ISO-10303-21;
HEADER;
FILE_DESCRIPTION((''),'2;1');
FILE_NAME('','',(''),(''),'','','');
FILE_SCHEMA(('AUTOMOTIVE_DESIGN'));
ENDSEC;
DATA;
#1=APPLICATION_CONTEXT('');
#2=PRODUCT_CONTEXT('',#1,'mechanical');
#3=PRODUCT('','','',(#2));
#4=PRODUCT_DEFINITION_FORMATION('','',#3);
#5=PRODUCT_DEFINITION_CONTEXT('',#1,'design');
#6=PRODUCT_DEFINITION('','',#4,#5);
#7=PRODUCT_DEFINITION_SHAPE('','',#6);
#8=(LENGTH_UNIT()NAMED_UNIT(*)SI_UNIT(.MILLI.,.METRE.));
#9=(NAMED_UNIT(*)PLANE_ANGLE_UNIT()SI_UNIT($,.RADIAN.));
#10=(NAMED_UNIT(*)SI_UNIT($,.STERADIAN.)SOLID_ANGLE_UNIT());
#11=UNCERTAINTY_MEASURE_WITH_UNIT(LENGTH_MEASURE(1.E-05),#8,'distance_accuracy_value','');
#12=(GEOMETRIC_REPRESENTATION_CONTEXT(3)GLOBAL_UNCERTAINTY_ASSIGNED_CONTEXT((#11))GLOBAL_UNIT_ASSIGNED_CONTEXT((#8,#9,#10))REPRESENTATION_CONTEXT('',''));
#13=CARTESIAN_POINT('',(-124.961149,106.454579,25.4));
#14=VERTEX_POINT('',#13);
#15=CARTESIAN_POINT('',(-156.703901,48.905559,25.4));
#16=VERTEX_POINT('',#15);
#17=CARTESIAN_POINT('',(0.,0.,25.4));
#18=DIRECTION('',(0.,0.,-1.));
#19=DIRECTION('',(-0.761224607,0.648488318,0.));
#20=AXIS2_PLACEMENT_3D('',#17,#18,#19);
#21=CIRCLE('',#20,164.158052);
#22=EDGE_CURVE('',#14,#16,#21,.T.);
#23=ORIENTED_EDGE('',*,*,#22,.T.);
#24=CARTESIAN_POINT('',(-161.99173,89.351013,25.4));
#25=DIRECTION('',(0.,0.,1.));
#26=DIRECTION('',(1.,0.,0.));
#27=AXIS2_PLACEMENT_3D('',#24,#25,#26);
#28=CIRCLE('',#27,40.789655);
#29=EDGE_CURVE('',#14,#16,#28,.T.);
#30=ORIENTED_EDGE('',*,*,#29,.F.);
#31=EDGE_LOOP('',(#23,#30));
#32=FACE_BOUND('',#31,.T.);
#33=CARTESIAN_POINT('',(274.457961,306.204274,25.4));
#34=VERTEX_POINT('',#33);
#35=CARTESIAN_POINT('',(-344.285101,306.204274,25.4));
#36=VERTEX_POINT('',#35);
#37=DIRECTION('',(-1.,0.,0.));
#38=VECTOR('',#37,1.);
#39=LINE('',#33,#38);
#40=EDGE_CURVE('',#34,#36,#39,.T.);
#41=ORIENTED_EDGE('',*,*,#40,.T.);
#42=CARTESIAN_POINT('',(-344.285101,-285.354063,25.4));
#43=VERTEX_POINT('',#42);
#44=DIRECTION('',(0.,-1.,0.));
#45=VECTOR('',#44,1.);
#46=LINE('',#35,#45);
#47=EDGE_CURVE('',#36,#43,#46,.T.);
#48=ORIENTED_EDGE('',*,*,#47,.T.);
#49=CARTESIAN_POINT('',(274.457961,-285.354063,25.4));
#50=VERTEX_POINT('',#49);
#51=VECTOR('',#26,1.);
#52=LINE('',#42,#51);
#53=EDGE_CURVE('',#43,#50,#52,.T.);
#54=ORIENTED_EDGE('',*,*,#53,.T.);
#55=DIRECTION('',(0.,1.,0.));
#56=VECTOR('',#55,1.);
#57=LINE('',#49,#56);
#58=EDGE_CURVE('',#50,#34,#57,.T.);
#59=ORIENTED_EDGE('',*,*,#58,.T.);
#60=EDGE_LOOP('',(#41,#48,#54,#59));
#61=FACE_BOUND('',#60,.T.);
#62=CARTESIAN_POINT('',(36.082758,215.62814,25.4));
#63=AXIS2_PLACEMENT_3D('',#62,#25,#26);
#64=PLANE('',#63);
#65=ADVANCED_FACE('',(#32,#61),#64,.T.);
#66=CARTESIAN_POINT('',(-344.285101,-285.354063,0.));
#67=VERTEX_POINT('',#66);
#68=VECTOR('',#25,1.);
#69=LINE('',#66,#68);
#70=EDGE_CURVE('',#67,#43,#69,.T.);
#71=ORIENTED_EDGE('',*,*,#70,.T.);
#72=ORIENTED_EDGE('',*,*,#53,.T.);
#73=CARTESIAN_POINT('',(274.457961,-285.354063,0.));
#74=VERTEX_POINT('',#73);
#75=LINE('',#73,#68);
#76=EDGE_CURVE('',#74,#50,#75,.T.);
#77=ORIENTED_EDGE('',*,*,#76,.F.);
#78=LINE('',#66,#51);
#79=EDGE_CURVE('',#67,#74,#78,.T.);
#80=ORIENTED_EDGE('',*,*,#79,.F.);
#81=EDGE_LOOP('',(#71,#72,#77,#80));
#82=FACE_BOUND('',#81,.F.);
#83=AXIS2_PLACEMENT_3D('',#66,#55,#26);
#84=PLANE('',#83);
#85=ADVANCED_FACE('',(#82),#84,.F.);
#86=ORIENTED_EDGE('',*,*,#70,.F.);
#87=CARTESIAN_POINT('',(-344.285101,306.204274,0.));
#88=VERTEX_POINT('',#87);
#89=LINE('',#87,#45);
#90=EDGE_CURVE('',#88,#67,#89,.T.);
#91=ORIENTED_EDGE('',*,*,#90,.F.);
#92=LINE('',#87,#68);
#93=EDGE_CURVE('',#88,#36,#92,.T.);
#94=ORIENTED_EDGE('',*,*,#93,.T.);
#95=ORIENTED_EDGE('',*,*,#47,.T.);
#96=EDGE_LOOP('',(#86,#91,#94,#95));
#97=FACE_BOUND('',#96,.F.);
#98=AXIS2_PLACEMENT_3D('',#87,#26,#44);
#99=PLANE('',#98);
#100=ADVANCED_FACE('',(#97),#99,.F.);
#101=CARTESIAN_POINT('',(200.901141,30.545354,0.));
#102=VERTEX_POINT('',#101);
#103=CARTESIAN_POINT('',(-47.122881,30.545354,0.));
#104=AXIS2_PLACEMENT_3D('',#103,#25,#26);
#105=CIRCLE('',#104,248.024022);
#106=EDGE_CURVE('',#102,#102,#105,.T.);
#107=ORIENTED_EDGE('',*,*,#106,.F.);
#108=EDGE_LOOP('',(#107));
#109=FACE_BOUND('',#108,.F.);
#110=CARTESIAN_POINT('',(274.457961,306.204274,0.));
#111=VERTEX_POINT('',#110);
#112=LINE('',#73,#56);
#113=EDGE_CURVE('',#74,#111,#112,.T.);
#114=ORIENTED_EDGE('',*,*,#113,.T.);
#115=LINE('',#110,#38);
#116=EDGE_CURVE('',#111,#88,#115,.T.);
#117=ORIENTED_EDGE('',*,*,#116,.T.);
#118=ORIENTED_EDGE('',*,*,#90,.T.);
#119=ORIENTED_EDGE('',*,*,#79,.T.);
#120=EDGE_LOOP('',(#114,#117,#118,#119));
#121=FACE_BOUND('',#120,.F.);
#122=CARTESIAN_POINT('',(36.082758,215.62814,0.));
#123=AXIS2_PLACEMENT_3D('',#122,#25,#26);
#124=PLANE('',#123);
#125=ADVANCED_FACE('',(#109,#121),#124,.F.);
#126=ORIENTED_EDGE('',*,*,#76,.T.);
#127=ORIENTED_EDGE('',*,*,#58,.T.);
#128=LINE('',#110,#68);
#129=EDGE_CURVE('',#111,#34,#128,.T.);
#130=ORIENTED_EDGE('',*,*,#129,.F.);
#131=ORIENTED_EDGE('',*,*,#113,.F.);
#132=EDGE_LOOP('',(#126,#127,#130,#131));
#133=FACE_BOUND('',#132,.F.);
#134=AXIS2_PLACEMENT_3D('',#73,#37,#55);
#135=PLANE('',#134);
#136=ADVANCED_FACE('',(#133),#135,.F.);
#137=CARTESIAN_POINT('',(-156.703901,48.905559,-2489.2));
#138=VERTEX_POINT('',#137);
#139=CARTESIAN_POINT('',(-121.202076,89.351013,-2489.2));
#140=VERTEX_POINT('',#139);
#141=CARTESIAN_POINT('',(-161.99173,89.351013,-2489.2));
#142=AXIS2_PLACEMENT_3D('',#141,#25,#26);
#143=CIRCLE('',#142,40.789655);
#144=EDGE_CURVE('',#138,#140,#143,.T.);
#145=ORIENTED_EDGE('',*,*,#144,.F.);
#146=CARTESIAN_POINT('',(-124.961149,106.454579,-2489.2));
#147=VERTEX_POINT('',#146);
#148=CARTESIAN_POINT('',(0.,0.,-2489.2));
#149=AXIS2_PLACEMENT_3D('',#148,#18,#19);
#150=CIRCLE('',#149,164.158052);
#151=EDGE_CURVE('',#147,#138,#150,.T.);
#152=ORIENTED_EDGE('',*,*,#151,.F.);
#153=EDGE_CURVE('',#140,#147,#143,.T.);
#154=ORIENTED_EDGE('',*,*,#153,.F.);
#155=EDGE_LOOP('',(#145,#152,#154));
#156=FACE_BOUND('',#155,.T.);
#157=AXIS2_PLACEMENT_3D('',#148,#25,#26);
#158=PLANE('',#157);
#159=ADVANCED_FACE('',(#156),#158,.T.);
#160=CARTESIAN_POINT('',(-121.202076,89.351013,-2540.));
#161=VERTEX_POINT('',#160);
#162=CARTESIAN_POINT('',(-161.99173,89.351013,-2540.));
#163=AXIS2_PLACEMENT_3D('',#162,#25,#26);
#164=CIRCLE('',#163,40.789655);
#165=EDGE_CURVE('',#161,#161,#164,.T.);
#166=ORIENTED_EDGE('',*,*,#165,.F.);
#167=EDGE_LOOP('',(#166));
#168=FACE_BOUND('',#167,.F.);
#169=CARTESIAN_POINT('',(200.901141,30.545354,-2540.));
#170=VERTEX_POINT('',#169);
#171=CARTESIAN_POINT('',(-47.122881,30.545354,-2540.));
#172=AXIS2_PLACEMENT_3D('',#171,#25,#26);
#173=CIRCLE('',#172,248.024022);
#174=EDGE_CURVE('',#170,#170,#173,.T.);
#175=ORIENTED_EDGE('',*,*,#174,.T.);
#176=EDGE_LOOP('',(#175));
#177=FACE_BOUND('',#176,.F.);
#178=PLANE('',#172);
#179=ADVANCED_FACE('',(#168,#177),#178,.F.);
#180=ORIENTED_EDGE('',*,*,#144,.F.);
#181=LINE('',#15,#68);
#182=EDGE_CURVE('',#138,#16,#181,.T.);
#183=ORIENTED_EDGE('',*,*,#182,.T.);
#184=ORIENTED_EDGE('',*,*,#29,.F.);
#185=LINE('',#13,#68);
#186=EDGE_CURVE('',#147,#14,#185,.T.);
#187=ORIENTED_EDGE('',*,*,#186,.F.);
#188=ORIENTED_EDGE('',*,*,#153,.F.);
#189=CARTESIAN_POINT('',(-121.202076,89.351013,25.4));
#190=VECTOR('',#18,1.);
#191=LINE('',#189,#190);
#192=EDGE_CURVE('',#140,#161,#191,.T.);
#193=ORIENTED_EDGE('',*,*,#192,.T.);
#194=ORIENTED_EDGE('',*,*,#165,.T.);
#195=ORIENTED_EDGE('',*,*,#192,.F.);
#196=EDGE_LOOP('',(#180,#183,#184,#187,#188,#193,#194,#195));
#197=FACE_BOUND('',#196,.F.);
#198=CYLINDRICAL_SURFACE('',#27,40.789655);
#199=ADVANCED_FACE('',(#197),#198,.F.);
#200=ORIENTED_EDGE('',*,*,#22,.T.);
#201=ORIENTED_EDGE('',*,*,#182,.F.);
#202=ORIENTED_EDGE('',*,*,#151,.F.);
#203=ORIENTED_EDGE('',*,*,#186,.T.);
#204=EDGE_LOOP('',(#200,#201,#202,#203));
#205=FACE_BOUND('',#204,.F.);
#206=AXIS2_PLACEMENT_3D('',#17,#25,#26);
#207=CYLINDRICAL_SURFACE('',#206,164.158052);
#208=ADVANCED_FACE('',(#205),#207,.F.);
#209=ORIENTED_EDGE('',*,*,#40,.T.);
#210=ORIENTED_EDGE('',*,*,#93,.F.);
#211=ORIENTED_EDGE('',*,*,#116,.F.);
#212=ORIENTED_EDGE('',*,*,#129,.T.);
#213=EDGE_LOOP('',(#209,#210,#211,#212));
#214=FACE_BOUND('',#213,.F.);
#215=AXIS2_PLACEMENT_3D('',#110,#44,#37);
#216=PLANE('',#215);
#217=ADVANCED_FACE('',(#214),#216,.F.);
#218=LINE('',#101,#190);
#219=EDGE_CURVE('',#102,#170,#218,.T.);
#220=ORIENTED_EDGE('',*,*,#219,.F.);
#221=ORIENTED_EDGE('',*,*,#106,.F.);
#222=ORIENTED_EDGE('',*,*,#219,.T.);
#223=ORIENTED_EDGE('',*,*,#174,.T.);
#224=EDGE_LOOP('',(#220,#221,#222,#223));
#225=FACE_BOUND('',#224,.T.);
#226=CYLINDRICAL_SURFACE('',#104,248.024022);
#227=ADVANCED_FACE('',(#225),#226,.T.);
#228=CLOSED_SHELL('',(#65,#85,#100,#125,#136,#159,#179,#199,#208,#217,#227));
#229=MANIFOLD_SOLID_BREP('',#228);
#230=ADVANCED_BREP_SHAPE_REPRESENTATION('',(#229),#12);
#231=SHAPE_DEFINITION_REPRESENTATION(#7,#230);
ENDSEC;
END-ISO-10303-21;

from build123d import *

# Parameters (mm, degrees)
F2_DEPTH  = 25.4
F3_R      = 248.0240216894
F4_DEPTH  = 2540
F5_W      = 119.7975315154
F5_H      = 181.1522692442
F5_W_2    = 320.4690925777
F5_H_2    = 205.2030339837
F5_W_3    = 6.3688382506
F5_W_4    = 172.1075996757
F6_DEPTH  = 25.4
F7_R      = 40.7896547179
F8_DEPTH  = 2565.401
F9_R      = 164.1580524022
F10_DEPTH = 2514.6


with BuildPart() as f2:
    # F1 (on face) → F2 (new body)
    with BuildSketch(Plane.XY):
        Polygon((-21.2495476007, -69.6708932519), (-21.2495476007, 53.5316392779), (0, 53.5316392779), (0, 76.628908515), (-80.3218334913, 76.628908515), (-80.3218334913, -69.6708932519), align=None)
        Polygon((0, 76.628908515), (0, 53.5316392779), (0, -69.6708932519), (74.5332688093, -69.6708932519), (74.5332688093, 76.628908515), align=None)
        Polygon((0, -69.6708932519), (-21.2495476007, -69.6708932519), (-80.3218334913, -69.6708932519), (-80.3218334913, -80.1510289311), (74.5332688093, -80.1510289311), (74.5332688093, -69.6708932519), align=None)
    extrude(amount=F2_DEPTH)

    # F3 (on Top) → F4 (join)
    with BuildSketch(Plane.XY):
        with Locations((-47.1228808165, 30.5453538895)):
            Circle(F3_R)
    extrude(amount=-F4_DEPTH)

    # F5 (on face) → F6 (join)
    with BuildSketch(Plane.XY):
        with Locations((36.0827576369, 215.6281396747)):
            Rectangle(F5_W, F5_H)
        with Locations((-184.0505544096, 215.6281396747)):
            Rectangle(F5_W_2, F5_H)
        with Locations((-184.0505544096, 22.4504880607)):
            Rectangle(F5_W_2, F5_H_2)
        with Locations((99.1659425199, 215.6281396747)):
            Rectangle(F5_W_3, F5_H)
        Polygon((95.9815233946, -80.1510289311), (-23.8160081208, -80.1510289311), (-23.8160081208, -285.3540629148), (102.3503616452, -285.3540629148), (102.3503616452, -80.1510289311), align=None)
        with Locations((-184.0505544096, -182.752545923)):
            Rectangle(F5_W_2, F5_H_2)
        with Locations((188.404161483, 215.6281396747)):
            Rectangle(F5_W_4, F5_H)
        with Locations((188.404161483, 22.4504880607)):
            Rectangle(F5_W_4, F5_H_2)
        with Locations((188.404161483, -182.752545923)):
            Rectangle(F5_W_4, F5_H_2)
    extrude(amount=F6_DEPTH)

    # F7 (on face) → F8 (cut, through all)
    with BuildSketch(Plane.XY.offset(25.4)):
        with Locations((-161.9917303324, 89.3510133028)):
            Circle(F7_R)
    extrude(amount=-F8_DEPTH, mode=Mode.SUBTRACT)

    # F9 (on face) → F10 (cut)
    with BuildSketch(Plane.XY.offset(25.4)):
        Circle(F9_R)
    extrude(amount=-F10_DEPTH, mode=Mode.SUBTRACT)


solid = f2.part
